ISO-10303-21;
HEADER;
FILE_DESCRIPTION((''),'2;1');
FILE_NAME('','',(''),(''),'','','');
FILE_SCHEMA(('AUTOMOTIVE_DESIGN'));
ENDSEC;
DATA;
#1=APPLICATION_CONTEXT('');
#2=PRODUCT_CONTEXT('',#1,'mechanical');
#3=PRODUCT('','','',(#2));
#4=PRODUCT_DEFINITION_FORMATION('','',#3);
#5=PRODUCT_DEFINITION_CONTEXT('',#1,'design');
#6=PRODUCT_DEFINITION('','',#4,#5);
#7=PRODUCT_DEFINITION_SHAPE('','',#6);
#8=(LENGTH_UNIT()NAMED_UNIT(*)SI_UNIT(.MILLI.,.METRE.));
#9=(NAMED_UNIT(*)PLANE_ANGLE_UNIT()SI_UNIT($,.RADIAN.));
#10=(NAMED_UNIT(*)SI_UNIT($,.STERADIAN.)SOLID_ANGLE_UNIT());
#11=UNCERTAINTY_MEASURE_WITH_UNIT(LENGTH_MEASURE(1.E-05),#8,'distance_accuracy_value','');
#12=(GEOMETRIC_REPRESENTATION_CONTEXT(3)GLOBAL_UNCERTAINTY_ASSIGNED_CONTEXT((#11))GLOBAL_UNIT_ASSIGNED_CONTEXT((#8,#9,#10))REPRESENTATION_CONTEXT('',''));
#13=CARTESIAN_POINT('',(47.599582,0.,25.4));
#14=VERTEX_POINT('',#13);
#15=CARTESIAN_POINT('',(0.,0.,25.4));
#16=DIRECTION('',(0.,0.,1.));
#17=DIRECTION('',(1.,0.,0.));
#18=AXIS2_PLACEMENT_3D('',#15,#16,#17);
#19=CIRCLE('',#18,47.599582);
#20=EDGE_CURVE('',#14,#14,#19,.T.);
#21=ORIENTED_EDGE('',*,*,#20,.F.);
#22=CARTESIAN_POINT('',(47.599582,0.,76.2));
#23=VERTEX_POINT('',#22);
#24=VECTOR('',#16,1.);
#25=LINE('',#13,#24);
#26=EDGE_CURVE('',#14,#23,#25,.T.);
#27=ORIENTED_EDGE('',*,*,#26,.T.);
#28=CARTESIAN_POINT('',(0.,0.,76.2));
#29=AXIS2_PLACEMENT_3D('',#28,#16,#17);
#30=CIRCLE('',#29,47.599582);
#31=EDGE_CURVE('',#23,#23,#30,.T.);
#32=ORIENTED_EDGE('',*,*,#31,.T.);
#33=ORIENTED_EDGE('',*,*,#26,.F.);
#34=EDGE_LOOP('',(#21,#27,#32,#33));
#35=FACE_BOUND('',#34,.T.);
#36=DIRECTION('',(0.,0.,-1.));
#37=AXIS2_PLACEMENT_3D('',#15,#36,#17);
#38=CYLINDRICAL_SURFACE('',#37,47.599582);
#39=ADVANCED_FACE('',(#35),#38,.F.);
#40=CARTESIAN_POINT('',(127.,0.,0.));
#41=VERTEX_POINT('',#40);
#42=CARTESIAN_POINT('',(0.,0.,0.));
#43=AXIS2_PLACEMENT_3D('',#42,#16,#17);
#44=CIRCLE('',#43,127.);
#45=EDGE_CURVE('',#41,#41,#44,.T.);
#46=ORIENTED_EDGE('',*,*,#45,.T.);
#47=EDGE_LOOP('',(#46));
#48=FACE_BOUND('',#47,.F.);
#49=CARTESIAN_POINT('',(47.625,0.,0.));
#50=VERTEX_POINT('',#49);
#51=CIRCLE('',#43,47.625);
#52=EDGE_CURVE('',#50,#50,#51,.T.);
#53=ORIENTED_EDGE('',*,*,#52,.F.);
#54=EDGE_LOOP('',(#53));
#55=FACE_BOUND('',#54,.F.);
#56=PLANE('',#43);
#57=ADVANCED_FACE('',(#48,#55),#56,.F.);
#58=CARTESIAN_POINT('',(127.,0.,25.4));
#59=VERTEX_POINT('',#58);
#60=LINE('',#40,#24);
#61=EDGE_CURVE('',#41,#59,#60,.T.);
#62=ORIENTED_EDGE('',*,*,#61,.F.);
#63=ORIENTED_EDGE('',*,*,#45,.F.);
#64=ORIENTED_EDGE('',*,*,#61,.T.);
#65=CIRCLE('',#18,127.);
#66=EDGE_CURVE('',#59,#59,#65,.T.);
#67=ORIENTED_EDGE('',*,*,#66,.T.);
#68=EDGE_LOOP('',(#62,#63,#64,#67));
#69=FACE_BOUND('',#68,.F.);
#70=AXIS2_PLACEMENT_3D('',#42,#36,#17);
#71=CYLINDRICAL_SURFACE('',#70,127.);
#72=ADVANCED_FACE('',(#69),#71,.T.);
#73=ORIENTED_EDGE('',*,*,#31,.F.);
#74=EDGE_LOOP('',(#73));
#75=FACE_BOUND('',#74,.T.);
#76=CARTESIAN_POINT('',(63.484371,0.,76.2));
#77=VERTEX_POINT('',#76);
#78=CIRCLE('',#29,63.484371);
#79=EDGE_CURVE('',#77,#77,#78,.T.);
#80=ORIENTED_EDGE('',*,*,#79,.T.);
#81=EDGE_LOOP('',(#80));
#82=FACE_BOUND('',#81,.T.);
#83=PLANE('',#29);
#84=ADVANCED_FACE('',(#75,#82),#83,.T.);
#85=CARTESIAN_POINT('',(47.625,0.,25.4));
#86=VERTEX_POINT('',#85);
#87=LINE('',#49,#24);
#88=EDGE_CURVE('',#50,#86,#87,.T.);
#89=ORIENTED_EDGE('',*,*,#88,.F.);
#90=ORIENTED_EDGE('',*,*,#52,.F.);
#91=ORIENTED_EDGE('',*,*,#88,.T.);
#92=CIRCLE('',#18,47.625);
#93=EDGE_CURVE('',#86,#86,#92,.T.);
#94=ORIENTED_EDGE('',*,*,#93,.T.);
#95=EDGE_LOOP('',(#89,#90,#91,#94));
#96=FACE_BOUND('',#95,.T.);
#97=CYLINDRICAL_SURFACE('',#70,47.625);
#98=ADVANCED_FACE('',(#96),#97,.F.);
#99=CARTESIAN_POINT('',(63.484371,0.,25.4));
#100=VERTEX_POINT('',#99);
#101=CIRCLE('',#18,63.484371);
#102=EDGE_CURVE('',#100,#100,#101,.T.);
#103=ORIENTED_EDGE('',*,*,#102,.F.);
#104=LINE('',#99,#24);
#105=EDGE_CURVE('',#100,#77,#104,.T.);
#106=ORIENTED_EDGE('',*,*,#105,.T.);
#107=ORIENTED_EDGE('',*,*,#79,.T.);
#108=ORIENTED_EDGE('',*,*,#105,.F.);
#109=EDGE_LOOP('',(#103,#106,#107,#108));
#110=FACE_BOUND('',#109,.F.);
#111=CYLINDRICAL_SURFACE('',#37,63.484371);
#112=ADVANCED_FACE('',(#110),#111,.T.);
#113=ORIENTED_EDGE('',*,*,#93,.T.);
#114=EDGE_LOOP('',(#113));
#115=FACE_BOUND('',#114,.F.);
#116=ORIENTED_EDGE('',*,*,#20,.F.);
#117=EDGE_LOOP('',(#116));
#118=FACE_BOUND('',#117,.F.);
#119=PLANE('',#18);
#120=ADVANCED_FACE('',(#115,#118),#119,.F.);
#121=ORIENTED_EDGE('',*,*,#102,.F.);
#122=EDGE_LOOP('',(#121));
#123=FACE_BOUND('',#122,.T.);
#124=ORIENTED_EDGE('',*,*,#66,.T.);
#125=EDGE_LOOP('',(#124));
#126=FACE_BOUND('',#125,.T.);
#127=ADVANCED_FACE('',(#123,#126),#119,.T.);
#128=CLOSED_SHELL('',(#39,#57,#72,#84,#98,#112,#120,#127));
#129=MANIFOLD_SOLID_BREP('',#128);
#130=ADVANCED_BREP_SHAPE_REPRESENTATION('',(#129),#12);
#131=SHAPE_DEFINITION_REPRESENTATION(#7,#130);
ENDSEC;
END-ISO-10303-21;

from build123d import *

# Parameters (mm, degrees)
F0_R     = 127
F0_R_2   = 47.625
F1_DEPTH = 25.4
F3_R     = 63.4843709873
F3_R_2   = 47.5995824196
F4_DEPTH = 50.8


# Not quite as in the source:
# - the program builds the solid bodies; features that only make, move or delete a surface that nothing else refers to are left out


with BuildPart() as f1:
    # F0 (on Top) → F1 (new body)
    with BuildSketch(Plane.XY):
        Circle(F0_R)
        Circle(F0_R_2, mode=Mode.SUBTRACT)
    extrude(amount=F1_DEPTH)

    # F3 (on face) → F4 (join)
    with BuildSketch(Plane.XY.offset(25.4)):
        Circle(F3_R)
        Circle(F3_R_2, mode=Mode.SUBTRACT)
    extrude(amount=F4_DEPTH)


solid = f1.part
